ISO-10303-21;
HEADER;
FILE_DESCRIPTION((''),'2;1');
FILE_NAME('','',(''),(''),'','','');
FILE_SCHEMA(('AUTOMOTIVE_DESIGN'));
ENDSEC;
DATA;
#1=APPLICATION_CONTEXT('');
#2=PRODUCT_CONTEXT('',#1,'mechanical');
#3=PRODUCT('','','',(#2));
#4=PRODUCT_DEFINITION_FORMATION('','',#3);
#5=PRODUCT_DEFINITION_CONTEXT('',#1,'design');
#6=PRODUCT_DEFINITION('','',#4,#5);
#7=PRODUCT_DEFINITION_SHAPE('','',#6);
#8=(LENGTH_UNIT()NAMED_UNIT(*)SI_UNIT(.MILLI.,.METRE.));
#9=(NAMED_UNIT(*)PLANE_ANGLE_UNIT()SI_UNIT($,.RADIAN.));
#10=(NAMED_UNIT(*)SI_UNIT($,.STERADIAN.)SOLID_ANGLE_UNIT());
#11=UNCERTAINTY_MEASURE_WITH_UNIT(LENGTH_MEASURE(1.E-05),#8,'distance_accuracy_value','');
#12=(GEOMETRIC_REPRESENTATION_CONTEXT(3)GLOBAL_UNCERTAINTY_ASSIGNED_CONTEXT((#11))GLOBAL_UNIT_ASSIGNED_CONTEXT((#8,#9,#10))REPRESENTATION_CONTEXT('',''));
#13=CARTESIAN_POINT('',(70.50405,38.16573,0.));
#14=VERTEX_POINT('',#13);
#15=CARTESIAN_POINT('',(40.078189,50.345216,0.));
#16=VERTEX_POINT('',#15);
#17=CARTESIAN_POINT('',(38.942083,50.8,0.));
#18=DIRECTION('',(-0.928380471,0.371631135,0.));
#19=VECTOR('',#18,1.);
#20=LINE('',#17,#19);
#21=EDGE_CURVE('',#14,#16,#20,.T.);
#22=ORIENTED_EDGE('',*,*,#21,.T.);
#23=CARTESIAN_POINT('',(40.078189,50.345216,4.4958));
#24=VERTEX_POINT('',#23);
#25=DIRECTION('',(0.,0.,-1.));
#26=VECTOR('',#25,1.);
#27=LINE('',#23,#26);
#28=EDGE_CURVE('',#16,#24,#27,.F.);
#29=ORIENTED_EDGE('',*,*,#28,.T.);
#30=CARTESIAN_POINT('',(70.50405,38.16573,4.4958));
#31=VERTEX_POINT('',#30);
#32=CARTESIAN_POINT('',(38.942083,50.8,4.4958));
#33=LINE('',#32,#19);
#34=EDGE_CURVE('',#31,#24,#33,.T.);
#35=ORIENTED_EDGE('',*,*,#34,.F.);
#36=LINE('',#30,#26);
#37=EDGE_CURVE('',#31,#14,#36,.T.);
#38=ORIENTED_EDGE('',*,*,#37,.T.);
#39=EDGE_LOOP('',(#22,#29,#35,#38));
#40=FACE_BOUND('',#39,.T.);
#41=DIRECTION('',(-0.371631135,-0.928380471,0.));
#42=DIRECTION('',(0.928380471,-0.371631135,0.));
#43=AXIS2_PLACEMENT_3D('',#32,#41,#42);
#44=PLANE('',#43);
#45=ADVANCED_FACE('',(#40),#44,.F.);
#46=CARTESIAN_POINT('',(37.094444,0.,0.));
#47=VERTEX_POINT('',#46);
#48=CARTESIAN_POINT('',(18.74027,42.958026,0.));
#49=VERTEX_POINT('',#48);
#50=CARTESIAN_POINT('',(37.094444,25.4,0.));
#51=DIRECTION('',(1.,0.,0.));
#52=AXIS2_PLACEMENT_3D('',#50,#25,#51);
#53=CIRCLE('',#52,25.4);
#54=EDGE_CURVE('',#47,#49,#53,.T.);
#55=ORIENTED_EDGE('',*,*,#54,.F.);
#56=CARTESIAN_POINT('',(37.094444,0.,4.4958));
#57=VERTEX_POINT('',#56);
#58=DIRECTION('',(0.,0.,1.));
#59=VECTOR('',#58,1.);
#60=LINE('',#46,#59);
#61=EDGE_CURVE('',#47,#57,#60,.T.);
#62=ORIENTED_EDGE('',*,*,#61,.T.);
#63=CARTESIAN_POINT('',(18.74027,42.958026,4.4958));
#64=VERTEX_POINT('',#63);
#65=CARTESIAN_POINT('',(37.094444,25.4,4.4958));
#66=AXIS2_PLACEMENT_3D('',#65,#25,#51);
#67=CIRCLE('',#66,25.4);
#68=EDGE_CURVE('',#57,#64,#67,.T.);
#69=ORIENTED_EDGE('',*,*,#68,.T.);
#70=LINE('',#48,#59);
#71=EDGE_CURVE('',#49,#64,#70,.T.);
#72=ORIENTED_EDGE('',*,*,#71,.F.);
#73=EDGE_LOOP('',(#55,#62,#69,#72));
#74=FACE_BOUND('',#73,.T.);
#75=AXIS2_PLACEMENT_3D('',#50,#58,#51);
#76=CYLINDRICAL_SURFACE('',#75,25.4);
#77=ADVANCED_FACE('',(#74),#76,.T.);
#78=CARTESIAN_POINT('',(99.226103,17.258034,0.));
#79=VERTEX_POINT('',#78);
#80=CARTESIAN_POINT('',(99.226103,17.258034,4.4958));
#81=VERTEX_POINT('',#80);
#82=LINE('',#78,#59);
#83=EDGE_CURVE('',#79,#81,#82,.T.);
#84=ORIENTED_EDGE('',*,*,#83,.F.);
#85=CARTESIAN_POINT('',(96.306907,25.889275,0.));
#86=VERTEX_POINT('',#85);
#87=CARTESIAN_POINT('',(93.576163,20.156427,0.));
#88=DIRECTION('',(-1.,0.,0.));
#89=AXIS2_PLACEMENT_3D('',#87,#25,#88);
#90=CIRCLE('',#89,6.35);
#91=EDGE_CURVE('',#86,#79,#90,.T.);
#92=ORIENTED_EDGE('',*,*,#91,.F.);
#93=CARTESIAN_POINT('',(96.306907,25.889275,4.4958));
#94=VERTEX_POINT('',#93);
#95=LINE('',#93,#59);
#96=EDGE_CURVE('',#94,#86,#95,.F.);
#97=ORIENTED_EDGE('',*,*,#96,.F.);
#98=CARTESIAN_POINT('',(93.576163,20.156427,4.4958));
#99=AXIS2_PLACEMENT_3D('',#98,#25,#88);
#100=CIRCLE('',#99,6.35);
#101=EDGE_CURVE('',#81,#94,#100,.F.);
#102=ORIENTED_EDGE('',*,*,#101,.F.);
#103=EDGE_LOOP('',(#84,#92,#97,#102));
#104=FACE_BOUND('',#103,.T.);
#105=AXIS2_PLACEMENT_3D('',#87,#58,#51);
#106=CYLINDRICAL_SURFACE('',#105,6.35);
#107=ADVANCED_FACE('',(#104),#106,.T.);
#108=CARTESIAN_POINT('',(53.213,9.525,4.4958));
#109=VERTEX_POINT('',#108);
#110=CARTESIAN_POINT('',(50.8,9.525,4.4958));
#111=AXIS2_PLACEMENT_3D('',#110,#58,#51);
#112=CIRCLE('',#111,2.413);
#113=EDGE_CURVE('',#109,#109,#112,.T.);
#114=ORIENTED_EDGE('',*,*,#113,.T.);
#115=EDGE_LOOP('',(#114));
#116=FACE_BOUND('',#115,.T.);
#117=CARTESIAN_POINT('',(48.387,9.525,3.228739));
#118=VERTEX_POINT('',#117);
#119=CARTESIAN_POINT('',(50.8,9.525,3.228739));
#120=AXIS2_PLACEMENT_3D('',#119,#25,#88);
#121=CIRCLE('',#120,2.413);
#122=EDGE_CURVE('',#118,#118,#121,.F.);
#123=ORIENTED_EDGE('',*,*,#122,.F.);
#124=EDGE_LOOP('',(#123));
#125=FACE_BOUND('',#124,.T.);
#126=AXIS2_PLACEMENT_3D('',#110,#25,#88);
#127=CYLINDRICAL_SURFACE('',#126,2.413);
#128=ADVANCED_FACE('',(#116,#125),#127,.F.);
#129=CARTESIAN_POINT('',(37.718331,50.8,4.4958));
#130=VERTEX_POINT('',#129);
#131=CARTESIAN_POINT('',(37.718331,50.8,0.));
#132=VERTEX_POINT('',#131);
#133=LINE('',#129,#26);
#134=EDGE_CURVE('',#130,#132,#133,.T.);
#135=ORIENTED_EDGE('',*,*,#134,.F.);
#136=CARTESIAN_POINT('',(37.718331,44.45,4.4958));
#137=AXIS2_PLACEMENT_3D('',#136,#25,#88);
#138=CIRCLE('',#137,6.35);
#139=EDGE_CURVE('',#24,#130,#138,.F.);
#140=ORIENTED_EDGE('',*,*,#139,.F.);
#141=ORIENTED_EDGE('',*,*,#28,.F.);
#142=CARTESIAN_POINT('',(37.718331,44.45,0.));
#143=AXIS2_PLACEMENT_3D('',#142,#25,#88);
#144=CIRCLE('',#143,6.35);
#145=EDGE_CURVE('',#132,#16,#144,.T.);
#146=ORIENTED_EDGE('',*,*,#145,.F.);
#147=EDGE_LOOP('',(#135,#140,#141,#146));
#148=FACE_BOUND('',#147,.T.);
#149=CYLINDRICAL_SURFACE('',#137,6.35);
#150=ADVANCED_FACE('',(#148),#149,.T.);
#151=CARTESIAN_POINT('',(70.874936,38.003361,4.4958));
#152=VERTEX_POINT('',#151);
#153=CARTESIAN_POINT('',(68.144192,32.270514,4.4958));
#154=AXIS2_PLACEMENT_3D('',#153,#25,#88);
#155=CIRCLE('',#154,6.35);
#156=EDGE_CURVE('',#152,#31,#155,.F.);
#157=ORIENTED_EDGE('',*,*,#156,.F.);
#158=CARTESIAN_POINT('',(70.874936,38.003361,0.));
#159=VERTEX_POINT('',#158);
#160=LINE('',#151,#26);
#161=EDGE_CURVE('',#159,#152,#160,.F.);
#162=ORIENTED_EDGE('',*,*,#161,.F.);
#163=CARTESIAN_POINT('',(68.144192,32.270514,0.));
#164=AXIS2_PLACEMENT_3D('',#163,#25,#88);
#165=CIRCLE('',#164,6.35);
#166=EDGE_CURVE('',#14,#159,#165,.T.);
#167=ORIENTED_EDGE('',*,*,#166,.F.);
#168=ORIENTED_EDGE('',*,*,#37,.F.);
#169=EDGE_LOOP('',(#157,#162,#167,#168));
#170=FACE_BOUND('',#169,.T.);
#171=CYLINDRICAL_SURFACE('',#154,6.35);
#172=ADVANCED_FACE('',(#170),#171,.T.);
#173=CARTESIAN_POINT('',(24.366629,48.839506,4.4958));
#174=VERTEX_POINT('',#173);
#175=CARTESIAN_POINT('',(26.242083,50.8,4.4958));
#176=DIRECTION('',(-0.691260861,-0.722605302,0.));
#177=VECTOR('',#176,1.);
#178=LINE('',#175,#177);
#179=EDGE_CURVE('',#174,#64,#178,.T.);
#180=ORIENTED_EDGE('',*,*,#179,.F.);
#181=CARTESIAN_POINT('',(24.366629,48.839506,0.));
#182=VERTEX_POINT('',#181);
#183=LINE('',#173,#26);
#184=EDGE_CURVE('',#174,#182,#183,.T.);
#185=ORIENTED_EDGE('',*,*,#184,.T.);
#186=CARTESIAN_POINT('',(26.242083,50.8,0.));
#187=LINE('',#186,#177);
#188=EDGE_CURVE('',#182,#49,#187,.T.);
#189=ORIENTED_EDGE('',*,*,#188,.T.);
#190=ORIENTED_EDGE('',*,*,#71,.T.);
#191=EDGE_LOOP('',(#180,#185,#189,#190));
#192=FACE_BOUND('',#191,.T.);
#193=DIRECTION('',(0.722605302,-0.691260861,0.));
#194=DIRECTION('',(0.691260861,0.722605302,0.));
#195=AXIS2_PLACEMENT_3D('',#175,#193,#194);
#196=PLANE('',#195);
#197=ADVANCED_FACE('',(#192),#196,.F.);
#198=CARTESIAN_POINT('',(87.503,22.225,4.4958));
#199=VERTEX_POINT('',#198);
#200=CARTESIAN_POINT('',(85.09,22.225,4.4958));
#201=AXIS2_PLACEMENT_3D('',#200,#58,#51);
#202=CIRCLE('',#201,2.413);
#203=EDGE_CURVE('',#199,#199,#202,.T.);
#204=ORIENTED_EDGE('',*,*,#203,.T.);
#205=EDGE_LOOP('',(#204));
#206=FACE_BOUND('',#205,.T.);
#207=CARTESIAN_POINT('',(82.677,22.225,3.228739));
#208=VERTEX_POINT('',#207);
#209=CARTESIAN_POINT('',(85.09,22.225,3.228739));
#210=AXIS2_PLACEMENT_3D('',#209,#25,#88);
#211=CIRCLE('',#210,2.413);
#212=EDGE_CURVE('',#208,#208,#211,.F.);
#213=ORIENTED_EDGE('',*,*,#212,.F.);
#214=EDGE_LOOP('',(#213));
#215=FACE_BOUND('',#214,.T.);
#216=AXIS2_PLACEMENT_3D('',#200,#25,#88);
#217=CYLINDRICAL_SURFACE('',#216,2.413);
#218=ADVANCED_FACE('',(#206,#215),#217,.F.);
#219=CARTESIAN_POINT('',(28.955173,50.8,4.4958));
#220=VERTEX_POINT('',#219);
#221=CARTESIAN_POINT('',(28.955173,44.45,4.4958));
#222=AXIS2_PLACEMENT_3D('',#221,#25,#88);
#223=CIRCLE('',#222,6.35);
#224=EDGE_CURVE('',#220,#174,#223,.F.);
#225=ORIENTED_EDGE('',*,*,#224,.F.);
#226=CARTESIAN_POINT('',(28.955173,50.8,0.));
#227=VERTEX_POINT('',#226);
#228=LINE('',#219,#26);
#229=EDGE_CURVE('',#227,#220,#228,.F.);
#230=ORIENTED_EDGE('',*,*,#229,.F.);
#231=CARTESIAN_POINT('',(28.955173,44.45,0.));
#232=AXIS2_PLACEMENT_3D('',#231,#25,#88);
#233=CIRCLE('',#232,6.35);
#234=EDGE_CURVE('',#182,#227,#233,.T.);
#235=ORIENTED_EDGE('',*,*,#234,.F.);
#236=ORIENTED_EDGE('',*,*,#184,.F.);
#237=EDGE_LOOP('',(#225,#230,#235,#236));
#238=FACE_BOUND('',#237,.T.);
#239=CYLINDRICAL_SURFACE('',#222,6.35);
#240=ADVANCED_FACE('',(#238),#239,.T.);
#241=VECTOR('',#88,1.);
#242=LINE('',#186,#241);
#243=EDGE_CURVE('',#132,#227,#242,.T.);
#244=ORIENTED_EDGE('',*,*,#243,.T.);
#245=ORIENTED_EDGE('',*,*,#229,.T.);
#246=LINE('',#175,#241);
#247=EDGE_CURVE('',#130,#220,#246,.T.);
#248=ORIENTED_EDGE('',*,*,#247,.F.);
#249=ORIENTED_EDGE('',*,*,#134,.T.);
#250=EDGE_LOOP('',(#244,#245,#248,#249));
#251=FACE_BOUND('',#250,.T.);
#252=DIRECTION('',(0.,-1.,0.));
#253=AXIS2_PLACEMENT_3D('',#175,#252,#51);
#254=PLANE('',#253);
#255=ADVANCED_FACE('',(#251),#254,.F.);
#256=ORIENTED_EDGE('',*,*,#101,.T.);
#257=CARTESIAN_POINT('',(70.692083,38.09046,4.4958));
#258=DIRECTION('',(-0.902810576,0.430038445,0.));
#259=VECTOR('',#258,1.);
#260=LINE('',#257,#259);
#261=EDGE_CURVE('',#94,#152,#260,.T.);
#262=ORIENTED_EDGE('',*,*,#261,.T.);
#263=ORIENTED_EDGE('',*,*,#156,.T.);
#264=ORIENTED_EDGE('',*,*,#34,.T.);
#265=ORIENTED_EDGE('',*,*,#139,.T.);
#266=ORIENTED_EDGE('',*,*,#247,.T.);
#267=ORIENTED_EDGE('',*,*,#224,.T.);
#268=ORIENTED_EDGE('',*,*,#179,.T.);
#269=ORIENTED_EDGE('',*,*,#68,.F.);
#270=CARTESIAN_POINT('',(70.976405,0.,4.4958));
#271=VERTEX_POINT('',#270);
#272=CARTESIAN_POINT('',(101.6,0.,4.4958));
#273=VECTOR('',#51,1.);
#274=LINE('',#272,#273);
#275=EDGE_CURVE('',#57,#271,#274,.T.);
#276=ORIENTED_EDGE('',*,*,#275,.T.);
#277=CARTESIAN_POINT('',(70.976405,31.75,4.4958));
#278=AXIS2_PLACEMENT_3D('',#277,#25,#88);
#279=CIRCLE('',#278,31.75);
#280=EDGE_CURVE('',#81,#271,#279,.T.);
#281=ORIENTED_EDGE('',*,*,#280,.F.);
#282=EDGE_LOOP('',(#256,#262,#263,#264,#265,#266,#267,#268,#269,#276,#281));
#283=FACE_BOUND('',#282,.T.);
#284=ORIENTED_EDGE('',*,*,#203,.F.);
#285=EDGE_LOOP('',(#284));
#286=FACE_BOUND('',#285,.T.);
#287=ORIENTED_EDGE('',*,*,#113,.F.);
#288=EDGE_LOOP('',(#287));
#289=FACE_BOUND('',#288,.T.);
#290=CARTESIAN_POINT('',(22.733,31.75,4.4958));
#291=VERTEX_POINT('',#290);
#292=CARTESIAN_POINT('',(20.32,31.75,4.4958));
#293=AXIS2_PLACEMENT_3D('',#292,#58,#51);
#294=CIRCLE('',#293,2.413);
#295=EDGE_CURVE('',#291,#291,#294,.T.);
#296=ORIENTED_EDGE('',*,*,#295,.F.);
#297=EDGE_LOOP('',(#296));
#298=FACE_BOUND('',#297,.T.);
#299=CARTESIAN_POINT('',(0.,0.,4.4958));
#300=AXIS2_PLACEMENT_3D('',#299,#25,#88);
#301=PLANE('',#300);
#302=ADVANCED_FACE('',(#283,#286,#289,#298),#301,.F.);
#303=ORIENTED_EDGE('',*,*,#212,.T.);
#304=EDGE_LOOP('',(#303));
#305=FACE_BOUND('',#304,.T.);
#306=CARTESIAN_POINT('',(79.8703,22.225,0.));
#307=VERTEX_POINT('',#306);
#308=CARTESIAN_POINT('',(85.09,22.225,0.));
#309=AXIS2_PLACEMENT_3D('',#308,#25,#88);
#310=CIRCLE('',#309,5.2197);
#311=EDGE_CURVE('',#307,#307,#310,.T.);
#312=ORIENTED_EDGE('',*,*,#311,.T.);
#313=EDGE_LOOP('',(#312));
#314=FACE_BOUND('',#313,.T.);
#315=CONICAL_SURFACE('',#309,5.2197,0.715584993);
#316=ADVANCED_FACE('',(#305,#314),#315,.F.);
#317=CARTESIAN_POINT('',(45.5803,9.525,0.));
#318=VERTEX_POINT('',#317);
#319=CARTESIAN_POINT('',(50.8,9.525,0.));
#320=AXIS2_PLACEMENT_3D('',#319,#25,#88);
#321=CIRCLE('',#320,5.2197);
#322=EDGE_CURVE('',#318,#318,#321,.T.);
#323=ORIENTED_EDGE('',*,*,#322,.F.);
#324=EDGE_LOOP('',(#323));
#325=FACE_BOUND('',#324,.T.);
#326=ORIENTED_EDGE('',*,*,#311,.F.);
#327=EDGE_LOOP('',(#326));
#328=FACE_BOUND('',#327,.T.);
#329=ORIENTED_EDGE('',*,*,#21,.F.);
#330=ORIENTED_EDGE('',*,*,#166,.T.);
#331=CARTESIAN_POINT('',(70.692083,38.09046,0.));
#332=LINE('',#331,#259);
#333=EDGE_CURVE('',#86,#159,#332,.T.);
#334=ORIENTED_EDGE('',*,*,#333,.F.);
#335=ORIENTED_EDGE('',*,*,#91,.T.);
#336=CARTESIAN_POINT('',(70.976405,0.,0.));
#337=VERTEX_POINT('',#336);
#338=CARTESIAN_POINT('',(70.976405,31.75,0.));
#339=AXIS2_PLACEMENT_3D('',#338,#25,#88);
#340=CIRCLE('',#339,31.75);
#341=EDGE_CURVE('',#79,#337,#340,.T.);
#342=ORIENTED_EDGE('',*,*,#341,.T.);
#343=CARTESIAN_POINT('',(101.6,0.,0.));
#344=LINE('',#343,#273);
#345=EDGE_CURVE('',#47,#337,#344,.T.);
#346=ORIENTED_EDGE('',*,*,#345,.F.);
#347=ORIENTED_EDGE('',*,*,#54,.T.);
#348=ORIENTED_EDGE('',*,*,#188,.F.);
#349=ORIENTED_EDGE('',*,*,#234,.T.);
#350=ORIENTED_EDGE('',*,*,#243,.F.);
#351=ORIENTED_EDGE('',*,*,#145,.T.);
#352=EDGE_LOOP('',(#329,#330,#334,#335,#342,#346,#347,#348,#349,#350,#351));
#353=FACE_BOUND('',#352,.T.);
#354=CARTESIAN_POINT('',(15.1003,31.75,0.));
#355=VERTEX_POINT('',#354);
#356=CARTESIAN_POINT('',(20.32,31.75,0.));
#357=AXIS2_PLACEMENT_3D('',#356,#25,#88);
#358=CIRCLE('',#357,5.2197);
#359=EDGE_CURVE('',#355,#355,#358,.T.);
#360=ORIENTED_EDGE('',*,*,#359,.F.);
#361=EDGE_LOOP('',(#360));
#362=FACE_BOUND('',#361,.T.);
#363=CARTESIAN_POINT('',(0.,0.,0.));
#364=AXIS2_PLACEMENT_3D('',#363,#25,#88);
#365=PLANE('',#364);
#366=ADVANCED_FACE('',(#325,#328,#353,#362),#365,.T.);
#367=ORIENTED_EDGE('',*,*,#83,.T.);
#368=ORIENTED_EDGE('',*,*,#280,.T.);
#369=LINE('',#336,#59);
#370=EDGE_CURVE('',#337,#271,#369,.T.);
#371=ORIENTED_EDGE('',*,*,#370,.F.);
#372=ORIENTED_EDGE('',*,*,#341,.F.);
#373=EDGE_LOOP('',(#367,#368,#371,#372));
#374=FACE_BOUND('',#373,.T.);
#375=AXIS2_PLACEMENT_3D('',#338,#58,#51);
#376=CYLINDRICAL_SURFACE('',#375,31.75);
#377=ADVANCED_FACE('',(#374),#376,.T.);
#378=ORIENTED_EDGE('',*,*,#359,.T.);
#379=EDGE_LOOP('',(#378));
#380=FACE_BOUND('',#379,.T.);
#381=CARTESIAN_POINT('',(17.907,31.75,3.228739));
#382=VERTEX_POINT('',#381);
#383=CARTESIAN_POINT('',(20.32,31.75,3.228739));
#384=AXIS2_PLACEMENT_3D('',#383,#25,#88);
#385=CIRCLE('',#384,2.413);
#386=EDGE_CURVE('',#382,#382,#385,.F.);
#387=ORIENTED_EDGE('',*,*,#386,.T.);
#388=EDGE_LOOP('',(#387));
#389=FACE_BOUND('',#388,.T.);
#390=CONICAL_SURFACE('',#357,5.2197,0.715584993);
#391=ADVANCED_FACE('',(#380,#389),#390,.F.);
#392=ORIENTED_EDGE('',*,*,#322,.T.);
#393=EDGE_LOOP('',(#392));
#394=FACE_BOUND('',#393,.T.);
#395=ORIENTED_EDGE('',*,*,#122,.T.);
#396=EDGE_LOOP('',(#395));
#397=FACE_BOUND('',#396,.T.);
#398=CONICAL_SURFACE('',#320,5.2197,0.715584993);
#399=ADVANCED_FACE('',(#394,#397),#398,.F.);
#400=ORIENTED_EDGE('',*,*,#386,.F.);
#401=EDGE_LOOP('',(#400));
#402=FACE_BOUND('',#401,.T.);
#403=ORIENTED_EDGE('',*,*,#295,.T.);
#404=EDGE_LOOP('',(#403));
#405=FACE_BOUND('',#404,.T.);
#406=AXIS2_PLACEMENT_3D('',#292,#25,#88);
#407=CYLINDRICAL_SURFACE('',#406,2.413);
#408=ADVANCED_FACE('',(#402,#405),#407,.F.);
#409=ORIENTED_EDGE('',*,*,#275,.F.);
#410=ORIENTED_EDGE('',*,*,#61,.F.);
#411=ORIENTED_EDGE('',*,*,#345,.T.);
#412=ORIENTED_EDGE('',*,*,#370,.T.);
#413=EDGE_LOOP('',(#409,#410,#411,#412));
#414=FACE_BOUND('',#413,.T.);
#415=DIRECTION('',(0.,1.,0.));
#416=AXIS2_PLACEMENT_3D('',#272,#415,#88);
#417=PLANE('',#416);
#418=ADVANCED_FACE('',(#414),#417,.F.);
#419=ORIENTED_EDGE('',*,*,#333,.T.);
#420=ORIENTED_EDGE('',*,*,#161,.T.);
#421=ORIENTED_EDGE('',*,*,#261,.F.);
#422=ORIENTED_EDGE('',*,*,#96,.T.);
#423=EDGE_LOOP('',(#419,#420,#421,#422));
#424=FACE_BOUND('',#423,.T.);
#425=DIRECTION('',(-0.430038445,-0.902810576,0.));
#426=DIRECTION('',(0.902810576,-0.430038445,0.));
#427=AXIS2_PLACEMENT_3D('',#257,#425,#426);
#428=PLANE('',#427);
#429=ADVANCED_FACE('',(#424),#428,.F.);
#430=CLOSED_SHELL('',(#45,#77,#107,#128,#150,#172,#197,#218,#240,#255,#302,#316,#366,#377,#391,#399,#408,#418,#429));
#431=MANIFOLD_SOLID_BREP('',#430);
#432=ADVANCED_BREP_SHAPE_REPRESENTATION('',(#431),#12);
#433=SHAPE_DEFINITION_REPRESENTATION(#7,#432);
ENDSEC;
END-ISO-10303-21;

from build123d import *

# Parameters (mm, degrees)
SKETCH1_R          = 2.413
EXTRUDE1_DEPTH     = 4.4958
CUT_EXTRUDE1_DEPTH = 114.681186736
FILLET1_R          = 6.35


with BuildPart() as part:
    # Sketch1 → Extrude1 (new body)
    with BuildSketch(Plane.XY):
        Polygon((26.2420825, 50.8), (0, 23.368), (0, 0), (101.6, 0), (101.6, 23.368), (70.6920825, 38.090460221), (38.9420825, 50.8), align=None)
        with Locations((20.32, 31.75)):
            Circle(SKETCH1_R, mode=Mode.SUBTRACT)
        with Locations((50.8, 9.525)):
            Circle(SKETCH1_R, mode=Mode.SUBTRACT)
        with Locations((85.09, 22.225)):
            Circle(SKETCH1_R, mode=Mode.SUBTRACT)
    extrude(amount=EXTRUDE1_DEPTH)

    # Sketch2 → Cut-Extrude1 (cut, through all)
    with BuildSketch(Plane.XY.offset(4.4958)):
        with BuildLine():
            Line((18.740269579, 42.958025871), (0, 23.368))
            Line((0, 23.368), (0, 0))
            Line((0, 0), (37.094444241, 0))
            ThreePointArc((37.094444241, 0), (13.737070061, 15.420367169), (18.740269579, 42.958025871))
        make_face()
        with BuildLine():
            Line((101.6, 23.368), (101.6, 0))
            Line((101.6, 0), (70.976404914, 0))
            ThreePointArc((70.976404914, 0), (90.236908542, 6.509249219), (101.6, 23.368))
        make_face()
    extrude(amount=-CUT_EXTRUDE1_DEPTH, mode=Mode.SUBTRACT)

    # Fillet1
    # the kernel refuses this fillet: 6.35 mm, written as the material it takes off along each edge
    with BuildSketch(Plane(origin=(26.2420825, 50.8, -6.782726088), x_dir=(-0.6912608610672895, -0.7226053016388058, 0), z_dir=(0, 0, 1))) as fillet1_piece_1:
        with BuildLine():
            CenterArc((FILLET1_R * 0.427258336235, FILLET1_R), FILLET1_R, 223.73, 46.27)
            Line((-FILLET1_R * 0.295346965404, FILLET1_R * 0.308739138933), (0, 0))
            Line((0, 0), (FILLET1_R * 0.427258336235, 0))
        make_face()
    extrude(amount=18.061252175, mode=Mode.SUBTRACT)
    with BuildSketch(Plane(origin=(38.9420825, 50.8, -3.059377728), x_dir=(-1, 0, 0), z_dir=(0, 0, 1))) as fillet1_piece_2:
        with BuildLine():
            CenterArc((FILLET1_R * 0.192716707281, FILLET1_R), FILLET1_R, 248.183751186, 21.816248814)
            Line((-FILLET1_R * 0.178914427547, FILLET1_R * 0.0716195286272), (0, 0))
            Line((0, 0), (FILLET1_R * 0.192716707281, 0))
        make_face()
    extrude(amount=10.614555456, mode=Mode.SUBTRACT)
    with BuildSketch(Plane(origin=(70.6920825, 38.090460221, -0.506345886), x_dir=(-0.9283804713727851, 0.3716311348281322, 0), z_dir=(0, 0, 1))) as fillet1_piece_3:
        with BuildLine():
            CenterArc((FILLET1_R * 0.0318958038441, FILLET1_R), FILLET1_R, 266.346248814, 3.653751186)
            Line((-FILLET1_R * 0.0318309718993, FILLET1_R * 0.00203261673873), (0, 0))
            Line((0, 0), (FILLET1_R * 0.0318958038441, 0))
        make_face()
    extrude(amount=5.508491772, mode=Mode.SUBTRACT)
    with BuildSketch(Plane(origin=(101.6, 23.368, -16.387317761), x_dir=(-0.9028105756982961, 0.43003844526659585, 0), z_dir=(0, 0, 1))) as fillet1_piece_4:
        with BuildLine():
            CenterArc((5.862905037, 6.35), FILLET1_R, 178.312383947, 91.687616053)
            ThreePointArc((-0.484340643, 6.537008757), (-0.411321416, 3.25597162), (0, 0))
            Line((0, 0), (5.862905037, 0))
        make_face()
    extrude(amount=37.270435521, mode=Mode.SUBTRACT)

    # Cut-Extrude2 cone 1 section (through the dimple's axis) → Cut-Extrude2 (revolve, cut)
    with BuildSketch(Plane(origin=(20.32, 31.75, 0), x_dir=(0, 1, 0), z_dir=(1, 0, 0))):
        Polygon((0, 0), (5.2197, 0), (0, 6.004577975), align=None)
    revolve(axis=Axis((20.32, 31.75, 0), (0, 0, 1)), mode=Mode.SUBTRACT)

    # Cut-Extrude2 cone 2 section (through the dimple's axis) → Cut-Extrude2 cone 2 (revolve, cut)
    with BuildSketch(Plane(origin=(50.8, 9.525, 0), x_dir=(0, 1, 0), z_dir=(1, 0, 0))):
        Polygon((0, 0), (5.2197, 0), (0, 6.004577975), align=None)
    revolve(axis=Axis((50.8, 9.525, 0), (0, 0, 1)), mode=Mode.SUBTRACT)

    # Cut-Extrude2 cone 3 section (through the dimple's axis) → Cut-Extrude2 cone 3 (revolve, cut)
    with BuildSketch(Plane(origin=(85.09, 22.225, 0), x_dir=(0, 1, 0), z_dir=(1, 0, 0))):
        Polygon((0, 0), (5.2197, 0), (0, 6.004577975), align=None)
    revolve(axis=Axis((85.09, 22.225, 0), (0, 0, 1)), mode=Mode.SUBTRACT)


solid = part.part
